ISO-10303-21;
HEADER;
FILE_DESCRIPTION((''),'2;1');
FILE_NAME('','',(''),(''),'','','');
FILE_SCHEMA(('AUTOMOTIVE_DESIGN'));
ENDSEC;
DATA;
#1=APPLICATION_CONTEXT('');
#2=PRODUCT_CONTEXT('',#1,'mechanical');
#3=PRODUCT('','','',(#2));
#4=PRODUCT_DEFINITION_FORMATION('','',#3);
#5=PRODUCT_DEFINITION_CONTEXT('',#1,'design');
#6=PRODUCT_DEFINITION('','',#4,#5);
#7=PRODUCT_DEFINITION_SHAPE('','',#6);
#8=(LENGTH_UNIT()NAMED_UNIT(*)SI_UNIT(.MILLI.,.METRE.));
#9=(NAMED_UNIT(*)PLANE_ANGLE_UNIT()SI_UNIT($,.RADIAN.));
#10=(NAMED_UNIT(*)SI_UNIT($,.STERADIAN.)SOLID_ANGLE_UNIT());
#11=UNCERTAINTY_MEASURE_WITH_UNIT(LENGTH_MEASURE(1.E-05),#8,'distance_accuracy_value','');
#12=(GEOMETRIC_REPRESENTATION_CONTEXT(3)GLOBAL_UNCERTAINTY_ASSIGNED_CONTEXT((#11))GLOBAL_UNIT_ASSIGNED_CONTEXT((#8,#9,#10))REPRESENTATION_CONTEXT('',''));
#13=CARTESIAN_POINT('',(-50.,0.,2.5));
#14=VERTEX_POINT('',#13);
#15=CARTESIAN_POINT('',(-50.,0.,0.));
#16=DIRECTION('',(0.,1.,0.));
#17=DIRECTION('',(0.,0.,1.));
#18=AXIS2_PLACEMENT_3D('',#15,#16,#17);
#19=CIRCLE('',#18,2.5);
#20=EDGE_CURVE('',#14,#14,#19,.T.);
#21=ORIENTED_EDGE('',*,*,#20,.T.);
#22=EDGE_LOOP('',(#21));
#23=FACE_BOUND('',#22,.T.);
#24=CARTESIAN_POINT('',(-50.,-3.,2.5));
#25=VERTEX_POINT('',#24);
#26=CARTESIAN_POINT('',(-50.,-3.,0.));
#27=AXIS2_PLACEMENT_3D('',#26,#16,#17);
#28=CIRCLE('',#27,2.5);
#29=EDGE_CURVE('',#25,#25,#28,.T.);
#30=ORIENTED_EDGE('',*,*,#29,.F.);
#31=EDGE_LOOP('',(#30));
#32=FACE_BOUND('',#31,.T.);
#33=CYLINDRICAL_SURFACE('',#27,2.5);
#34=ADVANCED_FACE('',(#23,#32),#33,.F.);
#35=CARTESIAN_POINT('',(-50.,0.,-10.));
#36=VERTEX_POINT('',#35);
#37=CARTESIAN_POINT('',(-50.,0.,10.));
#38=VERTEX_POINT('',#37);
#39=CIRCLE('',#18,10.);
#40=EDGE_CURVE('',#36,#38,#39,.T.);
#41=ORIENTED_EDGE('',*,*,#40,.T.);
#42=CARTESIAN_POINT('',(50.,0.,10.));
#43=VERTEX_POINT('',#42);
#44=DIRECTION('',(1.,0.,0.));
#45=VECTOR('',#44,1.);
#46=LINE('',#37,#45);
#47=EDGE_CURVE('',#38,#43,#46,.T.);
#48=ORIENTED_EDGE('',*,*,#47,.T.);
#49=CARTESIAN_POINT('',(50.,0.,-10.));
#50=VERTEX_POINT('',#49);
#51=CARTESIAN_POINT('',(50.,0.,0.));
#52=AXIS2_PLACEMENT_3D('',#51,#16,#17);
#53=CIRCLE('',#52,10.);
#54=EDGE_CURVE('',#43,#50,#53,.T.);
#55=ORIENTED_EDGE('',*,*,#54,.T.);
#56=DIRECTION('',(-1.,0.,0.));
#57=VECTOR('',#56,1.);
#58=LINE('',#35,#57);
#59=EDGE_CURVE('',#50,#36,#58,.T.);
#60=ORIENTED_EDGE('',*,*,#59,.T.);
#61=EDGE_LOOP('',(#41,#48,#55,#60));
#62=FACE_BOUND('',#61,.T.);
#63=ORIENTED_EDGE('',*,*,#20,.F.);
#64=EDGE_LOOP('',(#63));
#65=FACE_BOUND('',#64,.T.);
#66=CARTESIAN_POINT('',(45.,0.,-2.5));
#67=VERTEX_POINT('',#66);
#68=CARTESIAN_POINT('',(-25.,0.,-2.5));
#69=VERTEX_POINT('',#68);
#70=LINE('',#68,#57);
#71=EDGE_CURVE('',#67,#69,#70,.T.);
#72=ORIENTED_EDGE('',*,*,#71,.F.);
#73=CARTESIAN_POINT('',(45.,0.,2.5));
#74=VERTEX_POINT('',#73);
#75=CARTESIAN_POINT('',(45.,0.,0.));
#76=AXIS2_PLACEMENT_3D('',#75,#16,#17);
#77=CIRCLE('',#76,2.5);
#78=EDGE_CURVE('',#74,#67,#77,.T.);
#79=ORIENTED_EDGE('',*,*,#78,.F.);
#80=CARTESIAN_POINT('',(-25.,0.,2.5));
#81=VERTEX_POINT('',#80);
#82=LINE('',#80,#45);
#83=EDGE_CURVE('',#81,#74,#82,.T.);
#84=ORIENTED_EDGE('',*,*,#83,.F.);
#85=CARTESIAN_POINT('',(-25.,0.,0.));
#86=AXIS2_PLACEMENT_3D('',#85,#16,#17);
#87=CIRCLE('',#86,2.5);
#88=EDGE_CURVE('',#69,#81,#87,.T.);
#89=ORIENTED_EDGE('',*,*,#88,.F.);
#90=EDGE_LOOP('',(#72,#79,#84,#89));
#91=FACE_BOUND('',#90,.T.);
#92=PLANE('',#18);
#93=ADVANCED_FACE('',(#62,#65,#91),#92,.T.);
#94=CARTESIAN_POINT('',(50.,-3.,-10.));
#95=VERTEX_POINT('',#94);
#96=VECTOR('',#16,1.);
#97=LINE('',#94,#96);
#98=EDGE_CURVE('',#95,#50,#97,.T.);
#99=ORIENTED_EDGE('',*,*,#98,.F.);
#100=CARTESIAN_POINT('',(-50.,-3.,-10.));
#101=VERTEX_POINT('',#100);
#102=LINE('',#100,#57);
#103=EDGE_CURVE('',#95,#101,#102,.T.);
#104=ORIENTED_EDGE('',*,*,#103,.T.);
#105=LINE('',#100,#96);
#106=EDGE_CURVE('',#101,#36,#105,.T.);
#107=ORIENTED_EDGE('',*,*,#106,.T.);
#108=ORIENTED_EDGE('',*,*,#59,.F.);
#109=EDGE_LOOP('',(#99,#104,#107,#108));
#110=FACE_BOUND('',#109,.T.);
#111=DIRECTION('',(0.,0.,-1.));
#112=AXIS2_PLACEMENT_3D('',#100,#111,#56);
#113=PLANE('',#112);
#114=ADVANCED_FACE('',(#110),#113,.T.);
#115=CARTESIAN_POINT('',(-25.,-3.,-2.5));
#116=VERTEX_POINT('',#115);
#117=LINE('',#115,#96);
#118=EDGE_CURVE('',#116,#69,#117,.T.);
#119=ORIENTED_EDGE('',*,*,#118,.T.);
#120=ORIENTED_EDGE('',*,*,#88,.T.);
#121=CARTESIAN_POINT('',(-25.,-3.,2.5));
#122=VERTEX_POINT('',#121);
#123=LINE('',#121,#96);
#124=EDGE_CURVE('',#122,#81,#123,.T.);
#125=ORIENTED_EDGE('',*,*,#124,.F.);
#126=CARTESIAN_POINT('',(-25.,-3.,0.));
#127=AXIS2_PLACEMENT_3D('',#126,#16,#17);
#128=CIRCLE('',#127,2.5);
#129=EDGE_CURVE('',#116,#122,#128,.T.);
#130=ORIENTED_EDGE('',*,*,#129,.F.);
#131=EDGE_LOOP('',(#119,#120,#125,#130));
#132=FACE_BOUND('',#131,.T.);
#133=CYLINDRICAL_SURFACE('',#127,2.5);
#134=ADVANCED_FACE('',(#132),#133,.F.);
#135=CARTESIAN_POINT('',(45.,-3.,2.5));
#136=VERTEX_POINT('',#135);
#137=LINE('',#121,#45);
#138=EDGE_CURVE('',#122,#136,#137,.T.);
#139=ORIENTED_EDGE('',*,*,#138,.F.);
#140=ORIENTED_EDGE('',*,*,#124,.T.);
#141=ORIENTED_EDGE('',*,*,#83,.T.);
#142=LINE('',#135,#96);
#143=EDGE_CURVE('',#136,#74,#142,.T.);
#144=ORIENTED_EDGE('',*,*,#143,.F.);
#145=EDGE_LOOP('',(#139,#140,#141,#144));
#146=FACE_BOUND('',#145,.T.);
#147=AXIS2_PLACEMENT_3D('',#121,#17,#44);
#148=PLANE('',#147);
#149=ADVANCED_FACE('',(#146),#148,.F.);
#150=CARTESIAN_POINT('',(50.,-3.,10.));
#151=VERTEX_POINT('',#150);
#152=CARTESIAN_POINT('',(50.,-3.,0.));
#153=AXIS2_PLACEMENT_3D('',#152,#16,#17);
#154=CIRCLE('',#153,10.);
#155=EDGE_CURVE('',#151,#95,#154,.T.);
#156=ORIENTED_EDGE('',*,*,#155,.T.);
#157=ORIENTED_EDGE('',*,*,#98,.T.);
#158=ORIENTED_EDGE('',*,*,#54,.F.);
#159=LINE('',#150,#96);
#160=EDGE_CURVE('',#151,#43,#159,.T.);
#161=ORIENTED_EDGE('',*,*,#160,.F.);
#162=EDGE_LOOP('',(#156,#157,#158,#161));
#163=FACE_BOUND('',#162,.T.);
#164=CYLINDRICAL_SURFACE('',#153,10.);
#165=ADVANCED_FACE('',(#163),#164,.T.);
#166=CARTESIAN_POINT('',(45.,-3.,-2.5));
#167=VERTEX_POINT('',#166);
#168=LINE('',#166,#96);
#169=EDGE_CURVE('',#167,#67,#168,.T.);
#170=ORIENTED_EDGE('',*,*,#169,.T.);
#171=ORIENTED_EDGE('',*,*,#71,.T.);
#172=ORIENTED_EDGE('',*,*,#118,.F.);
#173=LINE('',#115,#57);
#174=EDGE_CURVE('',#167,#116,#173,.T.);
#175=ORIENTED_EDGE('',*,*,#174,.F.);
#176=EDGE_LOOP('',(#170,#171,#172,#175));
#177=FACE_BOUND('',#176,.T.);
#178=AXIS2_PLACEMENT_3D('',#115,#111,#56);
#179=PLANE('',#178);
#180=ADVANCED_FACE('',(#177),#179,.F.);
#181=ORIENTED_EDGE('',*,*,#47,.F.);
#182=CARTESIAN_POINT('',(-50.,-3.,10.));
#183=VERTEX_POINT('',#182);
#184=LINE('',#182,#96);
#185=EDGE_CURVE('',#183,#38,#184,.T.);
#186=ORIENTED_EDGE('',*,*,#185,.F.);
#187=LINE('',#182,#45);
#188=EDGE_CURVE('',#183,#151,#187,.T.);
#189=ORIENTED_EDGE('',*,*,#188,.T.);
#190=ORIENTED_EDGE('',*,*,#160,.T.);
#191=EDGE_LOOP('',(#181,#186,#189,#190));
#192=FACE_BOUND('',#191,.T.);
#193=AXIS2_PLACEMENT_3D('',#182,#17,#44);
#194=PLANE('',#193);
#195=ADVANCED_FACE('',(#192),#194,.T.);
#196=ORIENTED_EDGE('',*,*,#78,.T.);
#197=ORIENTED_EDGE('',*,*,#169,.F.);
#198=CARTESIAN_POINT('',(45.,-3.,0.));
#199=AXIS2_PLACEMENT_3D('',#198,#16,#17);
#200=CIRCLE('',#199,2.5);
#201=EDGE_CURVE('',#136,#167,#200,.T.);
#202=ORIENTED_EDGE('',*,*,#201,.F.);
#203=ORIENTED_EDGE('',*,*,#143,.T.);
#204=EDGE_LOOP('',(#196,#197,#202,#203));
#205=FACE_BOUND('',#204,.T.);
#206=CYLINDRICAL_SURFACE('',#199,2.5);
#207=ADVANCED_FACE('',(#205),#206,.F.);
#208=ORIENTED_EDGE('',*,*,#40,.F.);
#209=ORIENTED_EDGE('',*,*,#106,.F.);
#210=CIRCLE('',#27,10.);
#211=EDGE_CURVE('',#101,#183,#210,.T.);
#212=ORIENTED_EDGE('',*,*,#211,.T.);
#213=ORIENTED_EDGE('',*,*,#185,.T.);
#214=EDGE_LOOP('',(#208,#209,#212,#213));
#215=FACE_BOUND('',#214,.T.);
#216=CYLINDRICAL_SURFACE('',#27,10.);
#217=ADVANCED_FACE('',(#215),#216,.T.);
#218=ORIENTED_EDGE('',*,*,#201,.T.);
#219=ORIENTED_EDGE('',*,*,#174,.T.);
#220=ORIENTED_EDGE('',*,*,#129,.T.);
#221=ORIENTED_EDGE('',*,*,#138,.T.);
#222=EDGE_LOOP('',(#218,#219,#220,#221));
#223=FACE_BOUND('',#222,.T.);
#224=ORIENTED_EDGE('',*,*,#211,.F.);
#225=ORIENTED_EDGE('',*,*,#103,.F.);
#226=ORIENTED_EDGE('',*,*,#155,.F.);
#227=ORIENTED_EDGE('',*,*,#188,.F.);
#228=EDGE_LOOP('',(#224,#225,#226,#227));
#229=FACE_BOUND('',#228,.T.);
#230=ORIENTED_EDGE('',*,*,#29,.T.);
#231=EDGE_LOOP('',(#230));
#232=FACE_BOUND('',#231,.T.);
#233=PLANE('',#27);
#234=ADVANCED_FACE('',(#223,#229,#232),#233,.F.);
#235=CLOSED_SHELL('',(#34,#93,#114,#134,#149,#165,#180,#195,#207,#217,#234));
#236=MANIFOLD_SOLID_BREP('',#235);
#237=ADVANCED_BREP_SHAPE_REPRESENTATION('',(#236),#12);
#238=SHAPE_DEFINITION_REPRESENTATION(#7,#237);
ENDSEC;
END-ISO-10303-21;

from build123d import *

# Parameters (mm, degrees)
SKETCH1_R          = 2.5
BASE_FLANGE1_DEPTH = 3


# Sheet-metal steps are written as plain solids
with BuildPart() as part:
    # Sketch1 → Base-Flange1 (new body)
    with BuildSketch(Plane(origin=(0, 0, 0), x_dir=(1, 0, 0), z_dir=(0, 1, 0))):
        with BuildLine():
            Line((-50, 10), (50, 10))
            ThreePointArc((50, 10), (60, 0), (50, -10))
            Line((50, -10), (-50, -10))
            ThreePointArc((-50, -10), (-60, 0), (-50, 10))
        make_face()
        with Locations(Location((-50, 0, 0), (0, 0, 270))):
            Circle(SKETCH1_R, mode=Mode.SUBTRACT)
        with BuildLine():
            Line((-25, 2.5), (45, 2.5))
            ThreePointArc((45, 2.5), (47.5, 0), (45, -2.5))
            Line((45, -2.5), (-25, -2.5))
            ThreePointArc((-25, -2.5), (-27.5, 0), (-25, 2.5))
        make_face(mode=Mode.SUBTRACT)
    extrude(amount=-BASE_FLANGE1_DEPTH)


solid = part.part
